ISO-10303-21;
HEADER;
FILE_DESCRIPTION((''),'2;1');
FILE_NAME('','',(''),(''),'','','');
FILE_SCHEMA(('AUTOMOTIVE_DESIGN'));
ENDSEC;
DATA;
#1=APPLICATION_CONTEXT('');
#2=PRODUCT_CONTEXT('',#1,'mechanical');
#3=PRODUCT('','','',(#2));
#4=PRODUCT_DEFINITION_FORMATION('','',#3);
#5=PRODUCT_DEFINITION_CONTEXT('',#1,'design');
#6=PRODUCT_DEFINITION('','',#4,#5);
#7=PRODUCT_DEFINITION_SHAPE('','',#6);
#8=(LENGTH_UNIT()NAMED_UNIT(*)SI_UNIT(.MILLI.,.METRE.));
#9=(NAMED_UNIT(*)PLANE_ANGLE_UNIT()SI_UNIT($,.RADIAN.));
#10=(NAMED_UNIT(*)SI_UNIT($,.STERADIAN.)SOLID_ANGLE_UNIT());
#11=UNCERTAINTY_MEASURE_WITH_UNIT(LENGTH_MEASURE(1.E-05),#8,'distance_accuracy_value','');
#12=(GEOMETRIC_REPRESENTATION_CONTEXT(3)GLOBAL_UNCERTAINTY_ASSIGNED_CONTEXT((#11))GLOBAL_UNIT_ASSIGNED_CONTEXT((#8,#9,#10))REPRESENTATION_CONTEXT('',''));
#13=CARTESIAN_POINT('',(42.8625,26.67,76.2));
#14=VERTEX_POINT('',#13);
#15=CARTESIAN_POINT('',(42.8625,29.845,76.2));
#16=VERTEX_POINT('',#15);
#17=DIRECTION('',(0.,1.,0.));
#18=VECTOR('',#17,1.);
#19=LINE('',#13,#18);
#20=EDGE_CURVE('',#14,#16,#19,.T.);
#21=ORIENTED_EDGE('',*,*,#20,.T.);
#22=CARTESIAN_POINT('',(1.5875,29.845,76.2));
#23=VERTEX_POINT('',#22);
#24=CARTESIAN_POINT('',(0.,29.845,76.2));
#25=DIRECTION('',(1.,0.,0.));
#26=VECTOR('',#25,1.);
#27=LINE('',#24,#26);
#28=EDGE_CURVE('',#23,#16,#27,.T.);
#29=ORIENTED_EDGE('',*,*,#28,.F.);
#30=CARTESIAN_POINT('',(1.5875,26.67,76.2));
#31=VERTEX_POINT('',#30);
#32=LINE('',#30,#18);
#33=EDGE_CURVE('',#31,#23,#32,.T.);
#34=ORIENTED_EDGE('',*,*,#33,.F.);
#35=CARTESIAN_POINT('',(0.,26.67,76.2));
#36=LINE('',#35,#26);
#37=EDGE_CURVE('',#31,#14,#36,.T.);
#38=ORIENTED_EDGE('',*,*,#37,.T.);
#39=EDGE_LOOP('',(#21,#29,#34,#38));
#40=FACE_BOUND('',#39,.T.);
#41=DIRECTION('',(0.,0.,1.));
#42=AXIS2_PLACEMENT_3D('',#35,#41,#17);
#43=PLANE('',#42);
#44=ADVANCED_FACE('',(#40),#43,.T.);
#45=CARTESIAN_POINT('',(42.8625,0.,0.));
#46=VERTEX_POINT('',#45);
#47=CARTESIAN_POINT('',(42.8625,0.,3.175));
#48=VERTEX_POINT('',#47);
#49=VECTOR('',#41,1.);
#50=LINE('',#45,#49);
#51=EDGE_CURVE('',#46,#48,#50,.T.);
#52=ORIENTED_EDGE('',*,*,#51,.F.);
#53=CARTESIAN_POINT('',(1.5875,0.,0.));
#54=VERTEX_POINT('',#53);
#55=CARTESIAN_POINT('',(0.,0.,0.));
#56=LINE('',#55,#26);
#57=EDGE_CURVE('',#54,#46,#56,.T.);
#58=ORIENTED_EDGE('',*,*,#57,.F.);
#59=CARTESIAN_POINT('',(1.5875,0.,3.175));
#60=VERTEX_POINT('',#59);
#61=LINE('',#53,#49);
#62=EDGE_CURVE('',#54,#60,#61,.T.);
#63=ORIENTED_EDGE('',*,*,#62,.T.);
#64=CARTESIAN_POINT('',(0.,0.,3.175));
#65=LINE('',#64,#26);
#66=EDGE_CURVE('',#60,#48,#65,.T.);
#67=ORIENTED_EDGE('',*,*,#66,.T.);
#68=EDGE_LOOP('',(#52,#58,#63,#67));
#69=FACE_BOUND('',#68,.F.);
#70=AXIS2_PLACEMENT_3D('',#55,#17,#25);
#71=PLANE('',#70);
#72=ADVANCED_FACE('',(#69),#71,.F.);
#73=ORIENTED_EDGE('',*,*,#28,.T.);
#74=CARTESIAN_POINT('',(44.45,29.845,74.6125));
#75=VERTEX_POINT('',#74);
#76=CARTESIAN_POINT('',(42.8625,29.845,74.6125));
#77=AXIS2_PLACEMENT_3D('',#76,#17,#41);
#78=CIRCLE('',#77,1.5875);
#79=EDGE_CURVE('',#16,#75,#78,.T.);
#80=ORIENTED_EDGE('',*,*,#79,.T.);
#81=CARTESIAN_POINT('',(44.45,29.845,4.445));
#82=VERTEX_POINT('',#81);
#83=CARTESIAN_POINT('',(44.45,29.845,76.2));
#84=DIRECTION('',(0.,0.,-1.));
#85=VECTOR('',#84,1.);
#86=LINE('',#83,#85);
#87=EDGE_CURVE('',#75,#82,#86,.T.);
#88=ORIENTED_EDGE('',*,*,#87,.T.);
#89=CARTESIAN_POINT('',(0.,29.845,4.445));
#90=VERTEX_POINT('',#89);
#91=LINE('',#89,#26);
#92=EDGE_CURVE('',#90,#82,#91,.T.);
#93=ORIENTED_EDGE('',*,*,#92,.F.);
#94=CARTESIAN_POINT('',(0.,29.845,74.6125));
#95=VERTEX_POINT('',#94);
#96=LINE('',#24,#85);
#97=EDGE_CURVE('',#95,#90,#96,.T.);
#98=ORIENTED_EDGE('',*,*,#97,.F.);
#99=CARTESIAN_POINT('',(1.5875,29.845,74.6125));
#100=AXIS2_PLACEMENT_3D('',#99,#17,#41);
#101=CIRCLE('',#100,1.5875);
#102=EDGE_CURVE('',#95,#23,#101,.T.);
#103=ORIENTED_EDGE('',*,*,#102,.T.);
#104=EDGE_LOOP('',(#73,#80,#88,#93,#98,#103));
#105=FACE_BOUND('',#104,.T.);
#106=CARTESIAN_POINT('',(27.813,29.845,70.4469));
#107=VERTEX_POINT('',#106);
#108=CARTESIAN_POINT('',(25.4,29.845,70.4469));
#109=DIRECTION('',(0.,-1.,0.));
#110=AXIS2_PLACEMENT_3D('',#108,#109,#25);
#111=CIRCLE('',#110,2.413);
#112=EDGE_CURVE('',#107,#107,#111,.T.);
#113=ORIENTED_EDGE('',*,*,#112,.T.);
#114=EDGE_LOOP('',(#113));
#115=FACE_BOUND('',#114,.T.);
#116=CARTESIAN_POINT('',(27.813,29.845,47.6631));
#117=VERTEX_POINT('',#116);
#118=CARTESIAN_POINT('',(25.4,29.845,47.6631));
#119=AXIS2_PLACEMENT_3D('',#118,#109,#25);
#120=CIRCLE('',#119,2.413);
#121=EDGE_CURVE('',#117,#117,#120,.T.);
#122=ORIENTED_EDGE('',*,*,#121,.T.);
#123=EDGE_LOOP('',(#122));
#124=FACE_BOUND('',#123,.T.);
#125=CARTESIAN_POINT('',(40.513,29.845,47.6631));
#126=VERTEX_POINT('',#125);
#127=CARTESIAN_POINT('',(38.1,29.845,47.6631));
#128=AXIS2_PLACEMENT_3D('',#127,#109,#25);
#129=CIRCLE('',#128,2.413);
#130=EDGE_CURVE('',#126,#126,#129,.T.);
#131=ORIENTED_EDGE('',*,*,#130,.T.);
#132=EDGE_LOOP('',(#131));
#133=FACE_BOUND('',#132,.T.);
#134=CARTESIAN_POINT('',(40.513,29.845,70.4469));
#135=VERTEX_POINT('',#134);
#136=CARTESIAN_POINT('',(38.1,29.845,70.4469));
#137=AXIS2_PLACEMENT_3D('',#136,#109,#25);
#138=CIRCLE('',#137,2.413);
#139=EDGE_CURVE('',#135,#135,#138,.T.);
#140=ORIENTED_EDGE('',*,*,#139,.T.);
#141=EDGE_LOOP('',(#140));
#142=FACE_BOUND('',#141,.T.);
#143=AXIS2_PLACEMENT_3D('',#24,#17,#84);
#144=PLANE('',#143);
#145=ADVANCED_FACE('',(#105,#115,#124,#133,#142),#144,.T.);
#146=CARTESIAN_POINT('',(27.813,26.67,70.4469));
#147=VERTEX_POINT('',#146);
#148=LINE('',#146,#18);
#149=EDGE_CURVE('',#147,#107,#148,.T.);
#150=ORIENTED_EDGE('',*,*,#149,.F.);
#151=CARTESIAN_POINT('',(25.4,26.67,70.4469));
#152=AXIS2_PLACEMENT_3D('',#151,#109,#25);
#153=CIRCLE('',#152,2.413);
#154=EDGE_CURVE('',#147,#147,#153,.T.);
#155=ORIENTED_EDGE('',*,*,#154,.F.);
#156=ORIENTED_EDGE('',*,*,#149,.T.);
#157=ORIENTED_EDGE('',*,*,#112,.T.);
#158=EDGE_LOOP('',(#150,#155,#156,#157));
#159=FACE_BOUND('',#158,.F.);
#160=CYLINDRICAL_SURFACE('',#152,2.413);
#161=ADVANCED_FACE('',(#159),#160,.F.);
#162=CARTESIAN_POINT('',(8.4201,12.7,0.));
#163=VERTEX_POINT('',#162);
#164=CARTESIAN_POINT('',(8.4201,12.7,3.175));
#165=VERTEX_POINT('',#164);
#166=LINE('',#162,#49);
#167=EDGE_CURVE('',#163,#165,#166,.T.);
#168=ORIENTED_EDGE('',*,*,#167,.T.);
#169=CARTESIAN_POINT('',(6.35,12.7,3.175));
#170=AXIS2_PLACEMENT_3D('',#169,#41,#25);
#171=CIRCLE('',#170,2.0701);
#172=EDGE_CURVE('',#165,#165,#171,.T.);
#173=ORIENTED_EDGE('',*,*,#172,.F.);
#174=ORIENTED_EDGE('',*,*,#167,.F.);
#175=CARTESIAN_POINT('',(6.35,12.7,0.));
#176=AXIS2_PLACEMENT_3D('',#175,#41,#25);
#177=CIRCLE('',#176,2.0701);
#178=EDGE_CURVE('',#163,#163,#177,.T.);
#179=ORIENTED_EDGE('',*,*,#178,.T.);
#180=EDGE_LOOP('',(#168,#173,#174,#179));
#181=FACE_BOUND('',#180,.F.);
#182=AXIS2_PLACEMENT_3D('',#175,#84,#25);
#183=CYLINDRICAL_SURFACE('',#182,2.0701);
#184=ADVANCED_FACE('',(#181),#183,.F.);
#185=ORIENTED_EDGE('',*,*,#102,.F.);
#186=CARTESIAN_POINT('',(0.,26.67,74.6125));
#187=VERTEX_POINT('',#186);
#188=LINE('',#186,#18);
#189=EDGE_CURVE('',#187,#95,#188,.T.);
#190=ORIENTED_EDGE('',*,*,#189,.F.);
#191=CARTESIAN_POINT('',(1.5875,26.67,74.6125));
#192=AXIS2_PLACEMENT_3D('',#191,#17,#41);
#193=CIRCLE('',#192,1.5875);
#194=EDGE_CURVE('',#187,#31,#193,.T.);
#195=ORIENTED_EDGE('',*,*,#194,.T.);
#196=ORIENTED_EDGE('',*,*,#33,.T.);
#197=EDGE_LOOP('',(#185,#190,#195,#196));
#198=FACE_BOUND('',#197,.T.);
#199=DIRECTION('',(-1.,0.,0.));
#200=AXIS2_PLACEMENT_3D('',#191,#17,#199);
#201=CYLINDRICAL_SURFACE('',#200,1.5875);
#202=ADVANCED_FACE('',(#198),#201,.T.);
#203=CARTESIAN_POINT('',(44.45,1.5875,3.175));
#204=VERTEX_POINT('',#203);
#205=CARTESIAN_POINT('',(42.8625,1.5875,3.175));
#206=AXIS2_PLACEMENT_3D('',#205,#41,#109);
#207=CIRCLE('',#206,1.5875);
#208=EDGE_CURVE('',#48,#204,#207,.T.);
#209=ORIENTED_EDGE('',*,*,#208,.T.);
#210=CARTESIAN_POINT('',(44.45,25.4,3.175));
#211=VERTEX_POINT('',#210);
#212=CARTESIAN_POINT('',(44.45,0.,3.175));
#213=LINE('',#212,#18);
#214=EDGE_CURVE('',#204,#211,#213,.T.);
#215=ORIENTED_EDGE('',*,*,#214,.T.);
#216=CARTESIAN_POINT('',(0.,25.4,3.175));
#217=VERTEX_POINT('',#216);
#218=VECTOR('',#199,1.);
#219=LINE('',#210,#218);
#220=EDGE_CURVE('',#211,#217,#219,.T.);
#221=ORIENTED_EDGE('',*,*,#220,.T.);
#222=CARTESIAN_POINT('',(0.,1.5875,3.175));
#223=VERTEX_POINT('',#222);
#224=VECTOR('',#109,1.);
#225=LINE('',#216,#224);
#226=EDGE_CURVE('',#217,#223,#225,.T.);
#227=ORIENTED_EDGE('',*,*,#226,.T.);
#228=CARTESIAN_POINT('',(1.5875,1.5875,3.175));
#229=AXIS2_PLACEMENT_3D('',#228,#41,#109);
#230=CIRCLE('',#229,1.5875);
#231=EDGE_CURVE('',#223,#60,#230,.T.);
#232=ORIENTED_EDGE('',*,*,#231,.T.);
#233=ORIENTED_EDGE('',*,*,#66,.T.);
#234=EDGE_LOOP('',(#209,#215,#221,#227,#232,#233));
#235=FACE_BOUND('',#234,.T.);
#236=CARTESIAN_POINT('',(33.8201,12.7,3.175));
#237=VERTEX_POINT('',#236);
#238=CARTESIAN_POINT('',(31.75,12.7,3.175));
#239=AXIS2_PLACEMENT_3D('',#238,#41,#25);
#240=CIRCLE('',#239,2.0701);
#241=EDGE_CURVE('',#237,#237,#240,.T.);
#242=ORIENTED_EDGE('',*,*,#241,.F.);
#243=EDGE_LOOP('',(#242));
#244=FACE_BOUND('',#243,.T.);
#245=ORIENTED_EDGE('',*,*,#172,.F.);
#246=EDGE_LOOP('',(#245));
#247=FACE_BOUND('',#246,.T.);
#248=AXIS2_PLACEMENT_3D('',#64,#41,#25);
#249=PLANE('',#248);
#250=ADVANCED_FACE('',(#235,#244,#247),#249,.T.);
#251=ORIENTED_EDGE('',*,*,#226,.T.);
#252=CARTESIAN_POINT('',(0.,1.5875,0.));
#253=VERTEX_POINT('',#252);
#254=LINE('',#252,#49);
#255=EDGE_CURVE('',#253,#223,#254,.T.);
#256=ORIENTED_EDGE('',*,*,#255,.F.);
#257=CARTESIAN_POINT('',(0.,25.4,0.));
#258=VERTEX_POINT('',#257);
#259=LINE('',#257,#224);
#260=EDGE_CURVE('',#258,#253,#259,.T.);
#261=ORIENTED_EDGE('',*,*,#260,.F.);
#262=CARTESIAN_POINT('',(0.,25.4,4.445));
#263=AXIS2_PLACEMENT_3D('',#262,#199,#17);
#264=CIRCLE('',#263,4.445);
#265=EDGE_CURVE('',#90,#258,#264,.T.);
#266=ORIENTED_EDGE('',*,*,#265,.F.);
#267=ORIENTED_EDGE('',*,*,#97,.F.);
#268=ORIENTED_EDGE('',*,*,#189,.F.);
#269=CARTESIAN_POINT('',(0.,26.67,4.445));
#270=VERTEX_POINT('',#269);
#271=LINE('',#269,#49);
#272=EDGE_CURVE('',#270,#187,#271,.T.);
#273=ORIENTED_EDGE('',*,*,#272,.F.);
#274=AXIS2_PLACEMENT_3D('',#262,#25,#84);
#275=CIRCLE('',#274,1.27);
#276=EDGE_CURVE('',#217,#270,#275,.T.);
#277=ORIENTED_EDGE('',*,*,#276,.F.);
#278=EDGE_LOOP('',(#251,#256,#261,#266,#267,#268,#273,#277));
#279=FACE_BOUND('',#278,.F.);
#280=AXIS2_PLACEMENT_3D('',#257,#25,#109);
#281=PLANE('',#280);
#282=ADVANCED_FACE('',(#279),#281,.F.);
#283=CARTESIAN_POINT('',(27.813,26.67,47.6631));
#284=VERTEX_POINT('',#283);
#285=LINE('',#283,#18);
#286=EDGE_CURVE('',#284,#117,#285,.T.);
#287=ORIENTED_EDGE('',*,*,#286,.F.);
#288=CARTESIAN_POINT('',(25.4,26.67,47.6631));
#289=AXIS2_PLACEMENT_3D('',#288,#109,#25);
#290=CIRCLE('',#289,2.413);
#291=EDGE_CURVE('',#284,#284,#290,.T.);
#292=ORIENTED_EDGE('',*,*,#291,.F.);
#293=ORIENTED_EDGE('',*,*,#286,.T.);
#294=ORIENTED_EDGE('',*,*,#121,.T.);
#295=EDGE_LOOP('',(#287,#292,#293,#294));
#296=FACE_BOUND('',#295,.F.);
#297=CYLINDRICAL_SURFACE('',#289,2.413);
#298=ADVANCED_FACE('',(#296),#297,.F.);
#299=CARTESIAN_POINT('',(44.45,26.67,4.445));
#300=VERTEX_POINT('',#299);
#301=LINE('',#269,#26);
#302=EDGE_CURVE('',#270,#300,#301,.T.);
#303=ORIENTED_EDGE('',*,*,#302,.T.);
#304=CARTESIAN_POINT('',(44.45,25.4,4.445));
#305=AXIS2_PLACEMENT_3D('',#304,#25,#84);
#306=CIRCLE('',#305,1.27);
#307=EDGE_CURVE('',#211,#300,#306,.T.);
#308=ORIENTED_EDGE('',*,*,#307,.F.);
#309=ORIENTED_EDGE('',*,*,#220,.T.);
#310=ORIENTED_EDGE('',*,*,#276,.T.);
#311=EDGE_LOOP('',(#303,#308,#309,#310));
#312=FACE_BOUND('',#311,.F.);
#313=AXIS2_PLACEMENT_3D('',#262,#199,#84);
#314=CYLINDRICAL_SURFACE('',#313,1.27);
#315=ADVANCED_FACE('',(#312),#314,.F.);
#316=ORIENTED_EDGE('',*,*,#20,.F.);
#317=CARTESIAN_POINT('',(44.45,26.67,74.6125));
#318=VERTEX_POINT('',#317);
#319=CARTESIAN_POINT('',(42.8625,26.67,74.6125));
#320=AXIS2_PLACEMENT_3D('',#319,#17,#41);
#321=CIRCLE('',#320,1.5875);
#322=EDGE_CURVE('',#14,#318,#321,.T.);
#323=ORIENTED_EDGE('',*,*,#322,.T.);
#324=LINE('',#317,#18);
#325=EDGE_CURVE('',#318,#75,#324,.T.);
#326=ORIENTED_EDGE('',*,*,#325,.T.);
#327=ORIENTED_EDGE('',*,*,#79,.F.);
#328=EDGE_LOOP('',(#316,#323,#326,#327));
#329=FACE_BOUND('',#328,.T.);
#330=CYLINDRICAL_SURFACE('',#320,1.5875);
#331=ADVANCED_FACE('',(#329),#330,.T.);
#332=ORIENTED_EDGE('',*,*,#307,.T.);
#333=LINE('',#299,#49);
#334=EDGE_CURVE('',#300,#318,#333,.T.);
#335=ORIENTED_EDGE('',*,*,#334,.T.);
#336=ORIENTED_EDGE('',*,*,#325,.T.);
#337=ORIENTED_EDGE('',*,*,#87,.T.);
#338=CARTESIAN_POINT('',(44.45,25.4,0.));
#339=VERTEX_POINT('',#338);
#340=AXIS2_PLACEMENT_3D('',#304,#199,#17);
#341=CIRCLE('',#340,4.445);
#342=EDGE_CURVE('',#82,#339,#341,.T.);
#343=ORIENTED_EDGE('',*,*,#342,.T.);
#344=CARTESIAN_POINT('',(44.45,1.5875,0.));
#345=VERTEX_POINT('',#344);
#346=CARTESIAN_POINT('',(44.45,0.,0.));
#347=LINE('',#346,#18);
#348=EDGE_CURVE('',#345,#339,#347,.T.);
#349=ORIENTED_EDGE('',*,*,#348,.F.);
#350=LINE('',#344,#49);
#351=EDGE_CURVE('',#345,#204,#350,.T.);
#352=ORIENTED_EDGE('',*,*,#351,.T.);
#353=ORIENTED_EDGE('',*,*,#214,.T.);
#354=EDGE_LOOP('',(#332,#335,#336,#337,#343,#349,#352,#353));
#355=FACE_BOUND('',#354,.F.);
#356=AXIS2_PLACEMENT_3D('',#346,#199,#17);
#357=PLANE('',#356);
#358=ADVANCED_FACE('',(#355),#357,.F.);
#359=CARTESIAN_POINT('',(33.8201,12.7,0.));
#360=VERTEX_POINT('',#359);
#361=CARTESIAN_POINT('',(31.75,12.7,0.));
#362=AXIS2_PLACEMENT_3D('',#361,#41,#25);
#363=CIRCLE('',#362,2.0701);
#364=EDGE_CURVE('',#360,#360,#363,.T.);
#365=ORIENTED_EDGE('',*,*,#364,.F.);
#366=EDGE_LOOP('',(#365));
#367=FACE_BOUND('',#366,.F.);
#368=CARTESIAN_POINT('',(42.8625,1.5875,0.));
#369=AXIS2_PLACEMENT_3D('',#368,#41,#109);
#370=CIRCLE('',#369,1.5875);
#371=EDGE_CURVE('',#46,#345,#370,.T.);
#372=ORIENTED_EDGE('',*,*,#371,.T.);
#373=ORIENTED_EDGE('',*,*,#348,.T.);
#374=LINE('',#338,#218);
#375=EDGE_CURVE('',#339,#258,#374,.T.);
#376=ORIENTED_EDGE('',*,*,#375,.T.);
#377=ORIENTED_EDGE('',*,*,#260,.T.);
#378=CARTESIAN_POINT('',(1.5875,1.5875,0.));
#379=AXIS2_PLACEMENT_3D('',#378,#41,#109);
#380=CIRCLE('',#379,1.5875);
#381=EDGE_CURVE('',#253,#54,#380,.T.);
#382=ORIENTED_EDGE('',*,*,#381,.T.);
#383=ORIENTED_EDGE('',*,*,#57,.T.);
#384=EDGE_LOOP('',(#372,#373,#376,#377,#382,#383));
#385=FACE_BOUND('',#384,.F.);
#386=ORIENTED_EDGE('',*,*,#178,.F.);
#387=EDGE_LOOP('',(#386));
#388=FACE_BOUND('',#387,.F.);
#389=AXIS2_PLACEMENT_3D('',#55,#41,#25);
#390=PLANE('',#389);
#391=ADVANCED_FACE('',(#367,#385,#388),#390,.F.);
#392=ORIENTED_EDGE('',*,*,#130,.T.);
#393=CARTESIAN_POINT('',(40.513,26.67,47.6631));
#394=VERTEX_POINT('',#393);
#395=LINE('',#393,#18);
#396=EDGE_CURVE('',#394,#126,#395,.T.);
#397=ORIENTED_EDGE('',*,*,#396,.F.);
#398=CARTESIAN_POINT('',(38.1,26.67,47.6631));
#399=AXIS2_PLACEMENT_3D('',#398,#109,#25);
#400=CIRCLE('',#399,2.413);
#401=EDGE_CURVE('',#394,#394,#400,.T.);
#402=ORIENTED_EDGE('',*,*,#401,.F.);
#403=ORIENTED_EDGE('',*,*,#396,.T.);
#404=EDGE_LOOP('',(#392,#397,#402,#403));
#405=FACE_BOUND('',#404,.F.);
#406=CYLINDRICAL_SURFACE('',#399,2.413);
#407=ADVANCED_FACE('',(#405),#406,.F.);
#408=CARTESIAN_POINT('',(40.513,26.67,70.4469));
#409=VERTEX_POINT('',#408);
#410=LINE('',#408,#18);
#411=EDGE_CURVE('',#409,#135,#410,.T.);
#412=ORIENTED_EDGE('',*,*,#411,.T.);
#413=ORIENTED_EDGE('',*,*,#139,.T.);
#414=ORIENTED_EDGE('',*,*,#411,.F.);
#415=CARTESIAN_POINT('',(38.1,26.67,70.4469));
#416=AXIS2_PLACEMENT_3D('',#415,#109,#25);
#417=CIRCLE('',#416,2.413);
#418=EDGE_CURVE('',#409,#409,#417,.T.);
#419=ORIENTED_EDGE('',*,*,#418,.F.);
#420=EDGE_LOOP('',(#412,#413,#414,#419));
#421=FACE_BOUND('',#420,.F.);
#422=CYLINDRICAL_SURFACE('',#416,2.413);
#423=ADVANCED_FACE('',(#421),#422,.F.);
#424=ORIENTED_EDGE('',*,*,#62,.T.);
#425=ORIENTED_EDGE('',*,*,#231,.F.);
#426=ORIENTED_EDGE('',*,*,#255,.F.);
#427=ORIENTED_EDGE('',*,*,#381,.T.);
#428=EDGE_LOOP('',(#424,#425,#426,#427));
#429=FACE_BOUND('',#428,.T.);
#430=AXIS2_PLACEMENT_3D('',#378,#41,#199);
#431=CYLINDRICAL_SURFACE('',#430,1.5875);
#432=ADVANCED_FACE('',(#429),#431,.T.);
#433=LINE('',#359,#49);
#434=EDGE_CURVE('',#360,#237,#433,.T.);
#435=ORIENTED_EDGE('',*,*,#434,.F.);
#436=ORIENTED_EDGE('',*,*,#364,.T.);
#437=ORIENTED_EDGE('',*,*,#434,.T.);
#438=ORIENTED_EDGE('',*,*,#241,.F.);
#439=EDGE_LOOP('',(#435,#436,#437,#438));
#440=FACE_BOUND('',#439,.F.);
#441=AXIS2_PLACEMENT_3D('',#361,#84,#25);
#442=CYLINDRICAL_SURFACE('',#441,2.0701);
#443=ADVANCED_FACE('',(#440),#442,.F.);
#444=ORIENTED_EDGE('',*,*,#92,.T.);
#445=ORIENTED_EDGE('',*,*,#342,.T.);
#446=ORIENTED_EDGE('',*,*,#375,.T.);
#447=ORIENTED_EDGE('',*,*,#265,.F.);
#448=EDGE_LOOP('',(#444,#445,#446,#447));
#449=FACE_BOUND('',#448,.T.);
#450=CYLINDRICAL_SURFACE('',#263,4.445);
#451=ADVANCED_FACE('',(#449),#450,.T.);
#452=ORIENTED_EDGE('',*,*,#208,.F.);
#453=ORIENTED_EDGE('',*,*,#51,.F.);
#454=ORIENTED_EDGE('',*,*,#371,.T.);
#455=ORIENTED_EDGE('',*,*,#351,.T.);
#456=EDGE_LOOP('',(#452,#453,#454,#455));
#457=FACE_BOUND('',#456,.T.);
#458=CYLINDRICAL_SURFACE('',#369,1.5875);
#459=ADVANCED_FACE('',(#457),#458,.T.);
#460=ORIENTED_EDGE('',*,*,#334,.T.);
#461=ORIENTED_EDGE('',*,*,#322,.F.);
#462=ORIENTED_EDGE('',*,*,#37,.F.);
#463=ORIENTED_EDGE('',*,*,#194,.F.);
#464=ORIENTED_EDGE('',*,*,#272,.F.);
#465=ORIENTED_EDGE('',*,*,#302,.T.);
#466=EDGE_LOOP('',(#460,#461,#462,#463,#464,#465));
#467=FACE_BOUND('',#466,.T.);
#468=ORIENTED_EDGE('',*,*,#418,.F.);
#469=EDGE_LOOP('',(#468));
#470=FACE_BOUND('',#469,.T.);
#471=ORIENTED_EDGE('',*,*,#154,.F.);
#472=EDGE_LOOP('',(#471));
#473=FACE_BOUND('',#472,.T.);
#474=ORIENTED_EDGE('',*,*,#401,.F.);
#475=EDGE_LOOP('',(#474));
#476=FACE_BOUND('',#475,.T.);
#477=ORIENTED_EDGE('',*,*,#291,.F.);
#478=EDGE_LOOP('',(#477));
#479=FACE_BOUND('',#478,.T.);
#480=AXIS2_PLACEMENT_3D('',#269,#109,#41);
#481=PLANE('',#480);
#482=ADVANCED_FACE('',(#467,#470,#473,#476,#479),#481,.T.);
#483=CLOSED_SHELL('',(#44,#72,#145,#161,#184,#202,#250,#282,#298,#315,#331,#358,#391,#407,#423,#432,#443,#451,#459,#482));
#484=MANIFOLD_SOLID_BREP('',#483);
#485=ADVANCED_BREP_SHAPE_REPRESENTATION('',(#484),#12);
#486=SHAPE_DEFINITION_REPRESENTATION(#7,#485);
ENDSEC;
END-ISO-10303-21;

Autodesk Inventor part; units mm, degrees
ref_plane "YZ Plane" through (0, 0, 0) normal (1, 0, 0) x (0, 1, 0)
ref_plane "XZ Plane" through (0, 0, 0) normal (0, 1, 0) x (-1, 0, 0)
ref_plane "XY Plane" through (0, 0, 0) normal (0, 0, 1) x (1, 0, 0)
sketch "Sketch1" plane through (0, 0, 0) normal (0, 0, 1) x (1, 0, 0)
  line L0 (0, 0) -> (44.45, 0)
  line L1 (44.45, 0) -> (44.45, 25.4)
  line L2 (44.45, 25.4) -> (0, 25.4)
  line L3 (0, 25.4) -> (0, 0)
  circle A0 centre (6.35, 12.7) radius 2.0701
  line L4 (0, 12.7) -> (44.45, 12.7) construction
  circle A1 centre (31.75, 12.7) radius 2.0701
  dimension "d0" = 44.45
  dimension "d1" = 25.4
  dimension "d2" = 4.1402
  dimension "d6" = 25.4
  dimension "d34" = 6.35
extrude "Plate1" add sketch "Sketch1" along normal blind 3.175
sketch "Sketch2" plane through (0, 26.67, 4.445) normal (0, 1, 0) x (-1, 0, 0)
  line L0 (-44.45, 0) -> (0, 0)
  line L1 (0, 0) -> (0, 71.755)
  line L2 (0, 71.755) -> (-44.45, 71.755)
  line L3 (-44.45, 71.755) -> (-44.45, 0)
edge flange "Flange1" height 76.2 angle 90 thickness 3.175 bend radius 1.27 thickness toward (0, 1, 0) relief tear relief width 3.175 relief depth 1.5875 edges at (22.225, 25.4, 3.175) wall of the first edge with corners at (44.45, 26.67, 4.445) (0, 26.67, 4.445) (0, 26.67, 76.2) (44.45, 26.67, 76.2)
bend "Bend1"
corner "Corner1"
fillet "Fillet1" radius 1.5875 4 edges at (44.45, 0, 1.5875) (0, 0, 1.5875) (44.45, 28.2575, 76.2) (0, 28.2575, 76.2)
sketch "Sketch3" plane through (0, 26.67, 4.445) normal (0, -1, 0) x (1, 0, 0)
  line L0 (22.225, 71.755) -> (41.275, 71.755) construction
  line L1 (41.275, 71.755) -> (41.275, 37.465) construction
  line L2 (41.275, 37.465) -> (22.225, 37.465) construction
  line L3 (22.225, 37.465) -> (22.225, 71.755) construction
  circle A0 centre (38.1, 66.0019) radius 2.413
  line L4 (31.75, 71.755) -> (31.75, 37.465) construction
  line L5 (22.225, 54.61) -> (41.275, 54.61) construction
  circle A1 centre (25.4, 66.0019) radius 2.413
  circle A2 centre (38.1, 43.2181) radius 2.413
  circle A3 centre (25.4, 43.2181) radius 2.413
  line L6 (0, 70.1675) -> (0, 0) projected
  line L7 (42.8625, 71.755) -> (1.5875, 71.755) projected
  point P0 (0, -4.445)
  dimension "d23" = 34.29
  dimension "d24" = 19.05
  dimension "d27" = 4.826
  dimension "d28" = 3.175
  dimension "d29" = 5.7531
  dimension "d35" = 22.225
extrude "Extrusion1" cut sketch "Sketch3" against normal blind 25.4
equation "\"d12\" = BendReliefWidth"
equation "\"d13\" = BendReliefDepth"
equation "\"d14\" = MinimumRemnant"
equation "\"d15\" = BendRadius"
equation "\"d19\" = CornerReliefSize"
equation "\"d20\" = GapSize"
equation "\"d21\" = JacobiRadiusSize"
equation "\"BendRadius\" = Thickness"
equation "\"BendReliefWidth\" = Thickness"
equation "\"BendReliefDepth\" = 0.5 * Thickness"
equation "\"CornerReliefSize\" = 4 * Thickness"
equation "\"MinimumRemnant\" = 2 * Thickness"
equation "\"TransitionRadius\" = BendRadius"
equation "\"JacobiRadiusSize\" = BendRadius"
equation "\"GapSize\" = Thickness"
equation "\"d11\" = BendRadius"
equation "\"Thickness\" = 3.175"
properties part number "Pneumatic Piston Back Flange (Lt Custom)"
